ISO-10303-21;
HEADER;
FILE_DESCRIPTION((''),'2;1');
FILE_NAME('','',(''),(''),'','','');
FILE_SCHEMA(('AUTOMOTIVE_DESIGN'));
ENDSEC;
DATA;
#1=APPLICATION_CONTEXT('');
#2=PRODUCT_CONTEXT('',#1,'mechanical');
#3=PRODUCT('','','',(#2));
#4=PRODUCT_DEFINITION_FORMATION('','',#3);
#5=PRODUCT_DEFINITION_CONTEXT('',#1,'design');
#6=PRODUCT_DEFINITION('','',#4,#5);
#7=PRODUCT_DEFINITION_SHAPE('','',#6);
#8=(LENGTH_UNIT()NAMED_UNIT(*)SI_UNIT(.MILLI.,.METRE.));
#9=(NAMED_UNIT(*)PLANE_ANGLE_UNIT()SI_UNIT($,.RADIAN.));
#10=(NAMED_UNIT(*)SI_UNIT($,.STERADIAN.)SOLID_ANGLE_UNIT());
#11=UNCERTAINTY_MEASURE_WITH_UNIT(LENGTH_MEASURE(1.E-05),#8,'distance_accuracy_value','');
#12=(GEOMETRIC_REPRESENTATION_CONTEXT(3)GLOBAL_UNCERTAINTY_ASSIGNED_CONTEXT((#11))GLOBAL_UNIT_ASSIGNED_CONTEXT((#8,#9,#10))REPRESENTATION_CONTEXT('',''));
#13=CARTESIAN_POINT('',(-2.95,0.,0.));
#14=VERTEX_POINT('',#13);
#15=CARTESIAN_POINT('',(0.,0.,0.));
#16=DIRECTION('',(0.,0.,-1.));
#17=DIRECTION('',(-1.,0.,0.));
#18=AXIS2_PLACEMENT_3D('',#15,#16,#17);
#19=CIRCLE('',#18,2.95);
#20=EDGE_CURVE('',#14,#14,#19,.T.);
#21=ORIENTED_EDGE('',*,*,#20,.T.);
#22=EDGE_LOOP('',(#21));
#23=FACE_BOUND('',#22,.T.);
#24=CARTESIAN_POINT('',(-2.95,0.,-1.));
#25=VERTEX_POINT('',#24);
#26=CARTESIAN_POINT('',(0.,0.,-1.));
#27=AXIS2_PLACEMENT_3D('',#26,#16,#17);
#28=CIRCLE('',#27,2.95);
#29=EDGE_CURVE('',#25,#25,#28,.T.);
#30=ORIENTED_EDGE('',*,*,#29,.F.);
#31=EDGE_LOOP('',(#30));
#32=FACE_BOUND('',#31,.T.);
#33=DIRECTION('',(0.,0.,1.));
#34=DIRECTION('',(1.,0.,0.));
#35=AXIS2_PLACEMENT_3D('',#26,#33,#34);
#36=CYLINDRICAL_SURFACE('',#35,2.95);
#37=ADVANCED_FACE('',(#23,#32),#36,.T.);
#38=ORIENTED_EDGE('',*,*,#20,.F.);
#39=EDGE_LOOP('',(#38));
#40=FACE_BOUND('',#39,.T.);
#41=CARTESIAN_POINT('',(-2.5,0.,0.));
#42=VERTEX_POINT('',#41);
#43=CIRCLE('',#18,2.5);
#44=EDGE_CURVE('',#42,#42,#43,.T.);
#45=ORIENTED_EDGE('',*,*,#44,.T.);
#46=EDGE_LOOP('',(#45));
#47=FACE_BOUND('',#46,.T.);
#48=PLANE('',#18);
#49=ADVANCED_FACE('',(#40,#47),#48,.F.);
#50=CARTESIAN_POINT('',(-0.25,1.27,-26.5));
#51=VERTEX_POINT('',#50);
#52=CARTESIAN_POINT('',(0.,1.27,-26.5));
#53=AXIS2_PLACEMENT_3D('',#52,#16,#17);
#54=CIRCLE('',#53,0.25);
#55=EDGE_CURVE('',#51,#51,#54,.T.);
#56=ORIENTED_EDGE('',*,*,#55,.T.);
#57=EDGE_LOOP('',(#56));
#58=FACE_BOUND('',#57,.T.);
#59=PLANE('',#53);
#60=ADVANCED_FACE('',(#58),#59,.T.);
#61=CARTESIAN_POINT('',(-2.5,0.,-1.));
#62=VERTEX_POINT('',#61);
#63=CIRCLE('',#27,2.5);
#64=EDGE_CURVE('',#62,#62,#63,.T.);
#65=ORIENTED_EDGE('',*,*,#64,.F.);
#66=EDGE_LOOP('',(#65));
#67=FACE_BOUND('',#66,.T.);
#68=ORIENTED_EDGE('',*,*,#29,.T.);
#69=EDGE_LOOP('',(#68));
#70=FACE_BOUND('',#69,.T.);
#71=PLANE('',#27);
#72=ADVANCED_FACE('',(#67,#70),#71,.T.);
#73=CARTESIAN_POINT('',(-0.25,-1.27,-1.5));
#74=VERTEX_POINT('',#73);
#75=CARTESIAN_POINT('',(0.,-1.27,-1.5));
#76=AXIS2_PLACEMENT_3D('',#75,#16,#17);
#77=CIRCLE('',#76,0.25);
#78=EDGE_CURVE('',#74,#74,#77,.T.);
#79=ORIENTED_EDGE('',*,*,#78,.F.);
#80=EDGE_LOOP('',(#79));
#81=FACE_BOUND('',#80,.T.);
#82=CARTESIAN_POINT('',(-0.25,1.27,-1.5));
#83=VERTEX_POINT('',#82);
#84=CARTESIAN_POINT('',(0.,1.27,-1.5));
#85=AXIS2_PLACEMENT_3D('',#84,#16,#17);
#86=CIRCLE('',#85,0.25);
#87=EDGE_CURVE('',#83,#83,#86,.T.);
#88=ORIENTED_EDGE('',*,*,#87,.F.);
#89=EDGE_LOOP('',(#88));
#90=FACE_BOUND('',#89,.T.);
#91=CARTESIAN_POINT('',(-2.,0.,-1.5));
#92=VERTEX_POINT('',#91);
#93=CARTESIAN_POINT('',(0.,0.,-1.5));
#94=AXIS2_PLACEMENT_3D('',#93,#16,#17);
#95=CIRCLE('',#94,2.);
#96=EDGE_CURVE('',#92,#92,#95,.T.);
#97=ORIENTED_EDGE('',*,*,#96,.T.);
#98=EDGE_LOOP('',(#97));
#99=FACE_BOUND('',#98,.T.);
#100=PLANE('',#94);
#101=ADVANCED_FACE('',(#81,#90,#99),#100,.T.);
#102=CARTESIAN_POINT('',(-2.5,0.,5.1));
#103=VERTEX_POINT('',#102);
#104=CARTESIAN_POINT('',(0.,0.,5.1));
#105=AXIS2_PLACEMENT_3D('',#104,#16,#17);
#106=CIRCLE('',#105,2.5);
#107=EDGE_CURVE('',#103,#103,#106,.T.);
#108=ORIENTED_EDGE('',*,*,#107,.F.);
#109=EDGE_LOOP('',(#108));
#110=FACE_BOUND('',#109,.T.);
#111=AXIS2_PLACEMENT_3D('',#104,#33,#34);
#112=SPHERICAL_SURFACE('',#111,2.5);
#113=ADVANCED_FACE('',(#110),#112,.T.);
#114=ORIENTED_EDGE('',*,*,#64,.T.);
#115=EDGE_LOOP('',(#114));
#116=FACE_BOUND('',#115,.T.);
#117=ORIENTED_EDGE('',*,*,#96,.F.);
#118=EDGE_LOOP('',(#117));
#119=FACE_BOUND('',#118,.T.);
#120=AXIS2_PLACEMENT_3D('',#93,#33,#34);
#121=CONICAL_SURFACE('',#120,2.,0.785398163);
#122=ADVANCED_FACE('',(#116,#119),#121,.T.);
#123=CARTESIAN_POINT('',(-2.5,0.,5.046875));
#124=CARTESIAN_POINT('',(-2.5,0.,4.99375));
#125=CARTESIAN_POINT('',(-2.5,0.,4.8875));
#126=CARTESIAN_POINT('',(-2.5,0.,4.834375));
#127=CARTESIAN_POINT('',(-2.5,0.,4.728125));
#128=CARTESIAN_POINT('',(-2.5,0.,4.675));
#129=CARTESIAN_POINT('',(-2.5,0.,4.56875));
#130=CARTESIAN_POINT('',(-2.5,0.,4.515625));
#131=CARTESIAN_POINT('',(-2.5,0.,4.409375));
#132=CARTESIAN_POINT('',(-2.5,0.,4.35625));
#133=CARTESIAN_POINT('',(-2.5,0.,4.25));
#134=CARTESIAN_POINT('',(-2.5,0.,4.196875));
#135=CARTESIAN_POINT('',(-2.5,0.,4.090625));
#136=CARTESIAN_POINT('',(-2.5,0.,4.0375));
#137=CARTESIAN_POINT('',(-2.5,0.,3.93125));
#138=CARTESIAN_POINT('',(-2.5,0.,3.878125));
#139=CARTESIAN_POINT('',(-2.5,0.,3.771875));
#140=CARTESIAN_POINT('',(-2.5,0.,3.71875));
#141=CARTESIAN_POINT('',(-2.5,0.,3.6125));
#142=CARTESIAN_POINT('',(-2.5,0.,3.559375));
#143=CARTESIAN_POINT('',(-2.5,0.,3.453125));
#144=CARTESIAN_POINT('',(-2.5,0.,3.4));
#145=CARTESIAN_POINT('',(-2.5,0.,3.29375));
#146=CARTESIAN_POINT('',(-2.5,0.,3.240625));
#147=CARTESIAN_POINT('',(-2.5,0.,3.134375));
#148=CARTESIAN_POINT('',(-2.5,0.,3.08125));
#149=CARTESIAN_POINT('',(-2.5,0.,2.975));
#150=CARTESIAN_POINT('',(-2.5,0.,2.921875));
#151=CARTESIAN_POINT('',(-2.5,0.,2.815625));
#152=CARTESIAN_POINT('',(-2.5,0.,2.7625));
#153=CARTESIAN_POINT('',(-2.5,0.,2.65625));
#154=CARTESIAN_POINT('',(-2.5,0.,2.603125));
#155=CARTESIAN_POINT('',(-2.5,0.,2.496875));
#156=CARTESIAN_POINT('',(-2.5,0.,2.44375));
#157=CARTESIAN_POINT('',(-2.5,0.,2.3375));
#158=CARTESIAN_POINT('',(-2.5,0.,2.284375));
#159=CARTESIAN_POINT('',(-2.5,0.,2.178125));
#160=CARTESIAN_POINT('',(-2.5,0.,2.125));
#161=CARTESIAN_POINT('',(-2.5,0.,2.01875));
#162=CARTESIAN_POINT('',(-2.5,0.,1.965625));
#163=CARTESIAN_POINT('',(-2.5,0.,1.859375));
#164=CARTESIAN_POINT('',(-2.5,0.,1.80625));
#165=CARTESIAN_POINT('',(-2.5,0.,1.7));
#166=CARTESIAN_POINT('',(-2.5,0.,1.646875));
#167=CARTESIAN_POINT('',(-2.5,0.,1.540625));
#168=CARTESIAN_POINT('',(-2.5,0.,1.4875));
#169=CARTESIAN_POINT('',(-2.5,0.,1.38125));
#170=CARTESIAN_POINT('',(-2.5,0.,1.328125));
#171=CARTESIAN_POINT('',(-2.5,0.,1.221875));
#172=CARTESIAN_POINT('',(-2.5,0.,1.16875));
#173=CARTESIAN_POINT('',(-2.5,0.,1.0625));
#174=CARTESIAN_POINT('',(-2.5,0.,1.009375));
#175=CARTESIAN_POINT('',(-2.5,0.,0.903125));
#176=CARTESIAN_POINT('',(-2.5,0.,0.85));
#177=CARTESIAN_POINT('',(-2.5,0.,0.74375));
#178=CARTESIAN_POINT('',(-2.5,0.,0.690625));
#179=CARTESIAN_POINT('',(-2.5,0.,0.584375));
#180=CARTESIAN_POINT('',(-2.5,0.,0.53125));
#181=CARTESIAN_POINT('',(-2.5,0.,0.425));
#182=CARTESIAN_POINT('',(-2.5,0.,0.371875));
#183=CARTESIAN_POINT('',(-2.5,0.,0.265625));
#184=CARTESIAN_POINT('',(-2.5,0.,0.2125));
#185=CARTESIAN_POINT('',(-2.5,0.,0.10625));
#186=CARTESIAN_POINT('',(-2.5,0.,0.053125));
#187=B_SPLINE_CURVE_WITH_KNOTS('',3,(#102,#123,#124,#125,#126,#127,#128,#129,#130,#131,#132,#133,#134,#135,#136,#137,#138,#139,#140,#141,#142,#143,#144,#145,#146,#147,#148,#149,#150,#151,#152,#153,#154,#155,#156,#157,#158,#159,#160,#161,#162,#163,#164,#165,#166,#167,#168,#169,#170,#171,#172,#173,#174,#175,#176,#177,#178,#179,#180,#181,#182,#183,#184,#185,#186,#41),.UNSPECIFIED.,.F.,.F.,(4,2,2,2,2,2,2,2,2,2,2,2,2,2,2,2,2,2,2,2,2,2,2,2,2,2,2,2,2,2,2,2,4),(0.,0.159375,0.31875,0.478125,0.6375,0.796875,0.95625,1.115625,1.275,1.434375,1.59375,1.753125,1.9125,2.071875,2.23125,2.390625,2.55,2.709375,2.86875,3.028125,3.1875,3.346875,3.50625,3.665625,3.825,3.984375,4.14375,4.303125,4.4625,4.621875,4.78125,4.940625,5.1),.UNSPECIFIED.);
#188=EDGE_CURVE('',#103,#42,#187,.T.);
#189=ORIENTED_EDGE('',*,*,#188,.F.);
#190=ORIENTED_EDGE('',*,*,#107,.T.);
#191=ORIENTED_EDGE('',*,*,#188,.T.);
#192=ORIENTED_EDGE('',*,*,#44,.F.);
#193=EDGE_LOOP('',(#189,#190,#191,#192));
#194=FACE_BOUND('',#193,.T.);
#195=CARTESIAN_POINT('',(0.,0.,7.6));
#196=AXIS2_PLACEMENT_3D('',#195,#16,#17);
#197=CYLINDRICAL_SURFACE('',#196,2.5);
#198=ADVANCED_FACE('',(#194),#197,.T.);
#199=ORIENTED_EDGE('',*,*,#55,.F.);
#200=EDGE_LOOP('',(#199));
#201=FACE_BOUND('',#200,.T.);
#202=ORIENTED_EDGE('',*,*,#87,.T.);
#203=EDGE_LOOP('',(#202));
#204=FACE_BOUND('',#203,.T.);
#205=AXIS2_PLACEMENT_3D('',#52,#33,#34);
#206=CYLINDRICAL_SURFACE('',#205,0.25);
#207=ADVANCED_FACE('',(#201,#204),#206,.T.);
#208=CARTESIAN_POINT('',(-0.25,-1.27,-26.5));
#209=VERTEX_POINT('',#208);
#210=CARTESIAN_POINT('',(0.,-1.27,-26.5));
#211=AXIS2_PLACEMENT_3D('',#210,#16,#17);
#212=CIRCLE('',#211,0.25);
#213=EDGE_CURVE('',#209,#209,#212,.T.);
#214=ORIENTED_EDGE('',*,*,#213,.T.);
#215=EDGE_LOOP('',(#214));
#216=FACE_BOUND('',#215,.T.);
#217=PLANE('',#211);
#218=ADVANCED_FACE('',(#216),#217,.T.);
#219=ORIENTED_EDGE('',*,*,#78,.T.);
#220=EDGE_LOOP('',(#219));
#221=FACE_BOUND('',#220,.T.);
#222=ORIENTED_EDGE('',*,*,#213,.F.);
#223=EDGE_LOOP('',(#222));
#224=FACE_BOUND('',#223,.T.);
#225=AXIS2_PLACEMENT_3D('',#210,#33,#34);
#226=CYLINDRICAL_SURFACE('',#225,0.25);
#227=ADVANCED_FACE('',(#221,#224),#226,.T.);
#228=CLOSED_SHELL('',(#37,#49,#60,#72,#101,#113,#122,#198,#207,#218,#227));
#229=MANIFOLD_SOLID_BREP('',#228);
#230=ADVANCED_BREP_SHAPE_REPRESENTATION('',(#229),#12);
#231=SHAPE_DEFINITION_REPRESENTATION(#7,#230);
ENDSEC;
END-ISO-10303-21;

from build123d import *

# Parameters (mm, degrees)
SKETCH_1_R      = 2.5
EXTRUDE_1_DEPTH = 7.6
FILLET_1_R      = 2.5
SKETCH_2_R      = 2.95
EXTRUDE_2_DEPTH = 1
EXTRUDE_START   = 0.5
SKETCH_3_R      = 2.5
EXTRUDE_3_DEPTH = 0.5
CHAMFER_1_SIZE  = 0.5
SKETCH_4_R      = 0.25
EXTRUDE_4_DEPTH = 25


with BuildPart() as part:
    # Эскиз1 → Бобышка-Вытянуть1 (new body)
    with BuildSketch(Plane.XY):
        with Locations(Location((0, 0, 0), (0, 0, 180))):
            Circle(SKETCH_1_R)
    extrude(amount=EXTRUDE_1_DEPTH)

    # Скругление1
    fillet_1_edges = [part.edges().sort_by_distance(p)[0] for p in [
        (2.5, 0, 7.6),
    ]]
    fillet(fillet_1_edges, radius=FILLET_1_R)

    # Эскиз2 → Бобышка-Вытянуть2 (add)
    with BuildSketch(Plane(origin=(0, 0, 0), x_dir=(-1, 0, 0), z_dir=(0, 0, -1))):
        Circle(SKETCH_2_R)
    extrude(amount=EXTRUDE_2_DEPTH)

    # Эскиз3 → Бобышка-Вытянуть3 (add)
    with BuildSketch(Plane(origin=(0, 0, -1), x_dir=(-1, 0, 0), z_dir=(0, 0, -1)).offset(EXTRUDE_START)):
        Circle(SKETCH_3_R)
    extrude(amount=-EXTRUDE_3_DEPTH)

    # Фаска1
    chamfer_1_edges = [part.edges().sort_by_distance(p)[0] for p in [
        (2.5, 0, -1.5),
    ]]
    chamfer(chamfer_1_edges, length=CHAMFER_1_SIZE - 0.0001)  # a hair under: the kernel refuses the full size

    # Эскиз4 → Бобышка-Вытянуть4 (add)
    with BuildSketch(Plane(origin=(0, 0, -1.5), x_dir=(-1, 0, 0), z_dir=(0, 0, -1))):
        with Locations((0, 1.27)):
            Circle(SKETCH_4_R)
        with Locations((0, -1.27)):
            Circle(SKETCH_4_R)
    extrude(amount=EXTRUDE_4_DEPTH)


solid = part.part
